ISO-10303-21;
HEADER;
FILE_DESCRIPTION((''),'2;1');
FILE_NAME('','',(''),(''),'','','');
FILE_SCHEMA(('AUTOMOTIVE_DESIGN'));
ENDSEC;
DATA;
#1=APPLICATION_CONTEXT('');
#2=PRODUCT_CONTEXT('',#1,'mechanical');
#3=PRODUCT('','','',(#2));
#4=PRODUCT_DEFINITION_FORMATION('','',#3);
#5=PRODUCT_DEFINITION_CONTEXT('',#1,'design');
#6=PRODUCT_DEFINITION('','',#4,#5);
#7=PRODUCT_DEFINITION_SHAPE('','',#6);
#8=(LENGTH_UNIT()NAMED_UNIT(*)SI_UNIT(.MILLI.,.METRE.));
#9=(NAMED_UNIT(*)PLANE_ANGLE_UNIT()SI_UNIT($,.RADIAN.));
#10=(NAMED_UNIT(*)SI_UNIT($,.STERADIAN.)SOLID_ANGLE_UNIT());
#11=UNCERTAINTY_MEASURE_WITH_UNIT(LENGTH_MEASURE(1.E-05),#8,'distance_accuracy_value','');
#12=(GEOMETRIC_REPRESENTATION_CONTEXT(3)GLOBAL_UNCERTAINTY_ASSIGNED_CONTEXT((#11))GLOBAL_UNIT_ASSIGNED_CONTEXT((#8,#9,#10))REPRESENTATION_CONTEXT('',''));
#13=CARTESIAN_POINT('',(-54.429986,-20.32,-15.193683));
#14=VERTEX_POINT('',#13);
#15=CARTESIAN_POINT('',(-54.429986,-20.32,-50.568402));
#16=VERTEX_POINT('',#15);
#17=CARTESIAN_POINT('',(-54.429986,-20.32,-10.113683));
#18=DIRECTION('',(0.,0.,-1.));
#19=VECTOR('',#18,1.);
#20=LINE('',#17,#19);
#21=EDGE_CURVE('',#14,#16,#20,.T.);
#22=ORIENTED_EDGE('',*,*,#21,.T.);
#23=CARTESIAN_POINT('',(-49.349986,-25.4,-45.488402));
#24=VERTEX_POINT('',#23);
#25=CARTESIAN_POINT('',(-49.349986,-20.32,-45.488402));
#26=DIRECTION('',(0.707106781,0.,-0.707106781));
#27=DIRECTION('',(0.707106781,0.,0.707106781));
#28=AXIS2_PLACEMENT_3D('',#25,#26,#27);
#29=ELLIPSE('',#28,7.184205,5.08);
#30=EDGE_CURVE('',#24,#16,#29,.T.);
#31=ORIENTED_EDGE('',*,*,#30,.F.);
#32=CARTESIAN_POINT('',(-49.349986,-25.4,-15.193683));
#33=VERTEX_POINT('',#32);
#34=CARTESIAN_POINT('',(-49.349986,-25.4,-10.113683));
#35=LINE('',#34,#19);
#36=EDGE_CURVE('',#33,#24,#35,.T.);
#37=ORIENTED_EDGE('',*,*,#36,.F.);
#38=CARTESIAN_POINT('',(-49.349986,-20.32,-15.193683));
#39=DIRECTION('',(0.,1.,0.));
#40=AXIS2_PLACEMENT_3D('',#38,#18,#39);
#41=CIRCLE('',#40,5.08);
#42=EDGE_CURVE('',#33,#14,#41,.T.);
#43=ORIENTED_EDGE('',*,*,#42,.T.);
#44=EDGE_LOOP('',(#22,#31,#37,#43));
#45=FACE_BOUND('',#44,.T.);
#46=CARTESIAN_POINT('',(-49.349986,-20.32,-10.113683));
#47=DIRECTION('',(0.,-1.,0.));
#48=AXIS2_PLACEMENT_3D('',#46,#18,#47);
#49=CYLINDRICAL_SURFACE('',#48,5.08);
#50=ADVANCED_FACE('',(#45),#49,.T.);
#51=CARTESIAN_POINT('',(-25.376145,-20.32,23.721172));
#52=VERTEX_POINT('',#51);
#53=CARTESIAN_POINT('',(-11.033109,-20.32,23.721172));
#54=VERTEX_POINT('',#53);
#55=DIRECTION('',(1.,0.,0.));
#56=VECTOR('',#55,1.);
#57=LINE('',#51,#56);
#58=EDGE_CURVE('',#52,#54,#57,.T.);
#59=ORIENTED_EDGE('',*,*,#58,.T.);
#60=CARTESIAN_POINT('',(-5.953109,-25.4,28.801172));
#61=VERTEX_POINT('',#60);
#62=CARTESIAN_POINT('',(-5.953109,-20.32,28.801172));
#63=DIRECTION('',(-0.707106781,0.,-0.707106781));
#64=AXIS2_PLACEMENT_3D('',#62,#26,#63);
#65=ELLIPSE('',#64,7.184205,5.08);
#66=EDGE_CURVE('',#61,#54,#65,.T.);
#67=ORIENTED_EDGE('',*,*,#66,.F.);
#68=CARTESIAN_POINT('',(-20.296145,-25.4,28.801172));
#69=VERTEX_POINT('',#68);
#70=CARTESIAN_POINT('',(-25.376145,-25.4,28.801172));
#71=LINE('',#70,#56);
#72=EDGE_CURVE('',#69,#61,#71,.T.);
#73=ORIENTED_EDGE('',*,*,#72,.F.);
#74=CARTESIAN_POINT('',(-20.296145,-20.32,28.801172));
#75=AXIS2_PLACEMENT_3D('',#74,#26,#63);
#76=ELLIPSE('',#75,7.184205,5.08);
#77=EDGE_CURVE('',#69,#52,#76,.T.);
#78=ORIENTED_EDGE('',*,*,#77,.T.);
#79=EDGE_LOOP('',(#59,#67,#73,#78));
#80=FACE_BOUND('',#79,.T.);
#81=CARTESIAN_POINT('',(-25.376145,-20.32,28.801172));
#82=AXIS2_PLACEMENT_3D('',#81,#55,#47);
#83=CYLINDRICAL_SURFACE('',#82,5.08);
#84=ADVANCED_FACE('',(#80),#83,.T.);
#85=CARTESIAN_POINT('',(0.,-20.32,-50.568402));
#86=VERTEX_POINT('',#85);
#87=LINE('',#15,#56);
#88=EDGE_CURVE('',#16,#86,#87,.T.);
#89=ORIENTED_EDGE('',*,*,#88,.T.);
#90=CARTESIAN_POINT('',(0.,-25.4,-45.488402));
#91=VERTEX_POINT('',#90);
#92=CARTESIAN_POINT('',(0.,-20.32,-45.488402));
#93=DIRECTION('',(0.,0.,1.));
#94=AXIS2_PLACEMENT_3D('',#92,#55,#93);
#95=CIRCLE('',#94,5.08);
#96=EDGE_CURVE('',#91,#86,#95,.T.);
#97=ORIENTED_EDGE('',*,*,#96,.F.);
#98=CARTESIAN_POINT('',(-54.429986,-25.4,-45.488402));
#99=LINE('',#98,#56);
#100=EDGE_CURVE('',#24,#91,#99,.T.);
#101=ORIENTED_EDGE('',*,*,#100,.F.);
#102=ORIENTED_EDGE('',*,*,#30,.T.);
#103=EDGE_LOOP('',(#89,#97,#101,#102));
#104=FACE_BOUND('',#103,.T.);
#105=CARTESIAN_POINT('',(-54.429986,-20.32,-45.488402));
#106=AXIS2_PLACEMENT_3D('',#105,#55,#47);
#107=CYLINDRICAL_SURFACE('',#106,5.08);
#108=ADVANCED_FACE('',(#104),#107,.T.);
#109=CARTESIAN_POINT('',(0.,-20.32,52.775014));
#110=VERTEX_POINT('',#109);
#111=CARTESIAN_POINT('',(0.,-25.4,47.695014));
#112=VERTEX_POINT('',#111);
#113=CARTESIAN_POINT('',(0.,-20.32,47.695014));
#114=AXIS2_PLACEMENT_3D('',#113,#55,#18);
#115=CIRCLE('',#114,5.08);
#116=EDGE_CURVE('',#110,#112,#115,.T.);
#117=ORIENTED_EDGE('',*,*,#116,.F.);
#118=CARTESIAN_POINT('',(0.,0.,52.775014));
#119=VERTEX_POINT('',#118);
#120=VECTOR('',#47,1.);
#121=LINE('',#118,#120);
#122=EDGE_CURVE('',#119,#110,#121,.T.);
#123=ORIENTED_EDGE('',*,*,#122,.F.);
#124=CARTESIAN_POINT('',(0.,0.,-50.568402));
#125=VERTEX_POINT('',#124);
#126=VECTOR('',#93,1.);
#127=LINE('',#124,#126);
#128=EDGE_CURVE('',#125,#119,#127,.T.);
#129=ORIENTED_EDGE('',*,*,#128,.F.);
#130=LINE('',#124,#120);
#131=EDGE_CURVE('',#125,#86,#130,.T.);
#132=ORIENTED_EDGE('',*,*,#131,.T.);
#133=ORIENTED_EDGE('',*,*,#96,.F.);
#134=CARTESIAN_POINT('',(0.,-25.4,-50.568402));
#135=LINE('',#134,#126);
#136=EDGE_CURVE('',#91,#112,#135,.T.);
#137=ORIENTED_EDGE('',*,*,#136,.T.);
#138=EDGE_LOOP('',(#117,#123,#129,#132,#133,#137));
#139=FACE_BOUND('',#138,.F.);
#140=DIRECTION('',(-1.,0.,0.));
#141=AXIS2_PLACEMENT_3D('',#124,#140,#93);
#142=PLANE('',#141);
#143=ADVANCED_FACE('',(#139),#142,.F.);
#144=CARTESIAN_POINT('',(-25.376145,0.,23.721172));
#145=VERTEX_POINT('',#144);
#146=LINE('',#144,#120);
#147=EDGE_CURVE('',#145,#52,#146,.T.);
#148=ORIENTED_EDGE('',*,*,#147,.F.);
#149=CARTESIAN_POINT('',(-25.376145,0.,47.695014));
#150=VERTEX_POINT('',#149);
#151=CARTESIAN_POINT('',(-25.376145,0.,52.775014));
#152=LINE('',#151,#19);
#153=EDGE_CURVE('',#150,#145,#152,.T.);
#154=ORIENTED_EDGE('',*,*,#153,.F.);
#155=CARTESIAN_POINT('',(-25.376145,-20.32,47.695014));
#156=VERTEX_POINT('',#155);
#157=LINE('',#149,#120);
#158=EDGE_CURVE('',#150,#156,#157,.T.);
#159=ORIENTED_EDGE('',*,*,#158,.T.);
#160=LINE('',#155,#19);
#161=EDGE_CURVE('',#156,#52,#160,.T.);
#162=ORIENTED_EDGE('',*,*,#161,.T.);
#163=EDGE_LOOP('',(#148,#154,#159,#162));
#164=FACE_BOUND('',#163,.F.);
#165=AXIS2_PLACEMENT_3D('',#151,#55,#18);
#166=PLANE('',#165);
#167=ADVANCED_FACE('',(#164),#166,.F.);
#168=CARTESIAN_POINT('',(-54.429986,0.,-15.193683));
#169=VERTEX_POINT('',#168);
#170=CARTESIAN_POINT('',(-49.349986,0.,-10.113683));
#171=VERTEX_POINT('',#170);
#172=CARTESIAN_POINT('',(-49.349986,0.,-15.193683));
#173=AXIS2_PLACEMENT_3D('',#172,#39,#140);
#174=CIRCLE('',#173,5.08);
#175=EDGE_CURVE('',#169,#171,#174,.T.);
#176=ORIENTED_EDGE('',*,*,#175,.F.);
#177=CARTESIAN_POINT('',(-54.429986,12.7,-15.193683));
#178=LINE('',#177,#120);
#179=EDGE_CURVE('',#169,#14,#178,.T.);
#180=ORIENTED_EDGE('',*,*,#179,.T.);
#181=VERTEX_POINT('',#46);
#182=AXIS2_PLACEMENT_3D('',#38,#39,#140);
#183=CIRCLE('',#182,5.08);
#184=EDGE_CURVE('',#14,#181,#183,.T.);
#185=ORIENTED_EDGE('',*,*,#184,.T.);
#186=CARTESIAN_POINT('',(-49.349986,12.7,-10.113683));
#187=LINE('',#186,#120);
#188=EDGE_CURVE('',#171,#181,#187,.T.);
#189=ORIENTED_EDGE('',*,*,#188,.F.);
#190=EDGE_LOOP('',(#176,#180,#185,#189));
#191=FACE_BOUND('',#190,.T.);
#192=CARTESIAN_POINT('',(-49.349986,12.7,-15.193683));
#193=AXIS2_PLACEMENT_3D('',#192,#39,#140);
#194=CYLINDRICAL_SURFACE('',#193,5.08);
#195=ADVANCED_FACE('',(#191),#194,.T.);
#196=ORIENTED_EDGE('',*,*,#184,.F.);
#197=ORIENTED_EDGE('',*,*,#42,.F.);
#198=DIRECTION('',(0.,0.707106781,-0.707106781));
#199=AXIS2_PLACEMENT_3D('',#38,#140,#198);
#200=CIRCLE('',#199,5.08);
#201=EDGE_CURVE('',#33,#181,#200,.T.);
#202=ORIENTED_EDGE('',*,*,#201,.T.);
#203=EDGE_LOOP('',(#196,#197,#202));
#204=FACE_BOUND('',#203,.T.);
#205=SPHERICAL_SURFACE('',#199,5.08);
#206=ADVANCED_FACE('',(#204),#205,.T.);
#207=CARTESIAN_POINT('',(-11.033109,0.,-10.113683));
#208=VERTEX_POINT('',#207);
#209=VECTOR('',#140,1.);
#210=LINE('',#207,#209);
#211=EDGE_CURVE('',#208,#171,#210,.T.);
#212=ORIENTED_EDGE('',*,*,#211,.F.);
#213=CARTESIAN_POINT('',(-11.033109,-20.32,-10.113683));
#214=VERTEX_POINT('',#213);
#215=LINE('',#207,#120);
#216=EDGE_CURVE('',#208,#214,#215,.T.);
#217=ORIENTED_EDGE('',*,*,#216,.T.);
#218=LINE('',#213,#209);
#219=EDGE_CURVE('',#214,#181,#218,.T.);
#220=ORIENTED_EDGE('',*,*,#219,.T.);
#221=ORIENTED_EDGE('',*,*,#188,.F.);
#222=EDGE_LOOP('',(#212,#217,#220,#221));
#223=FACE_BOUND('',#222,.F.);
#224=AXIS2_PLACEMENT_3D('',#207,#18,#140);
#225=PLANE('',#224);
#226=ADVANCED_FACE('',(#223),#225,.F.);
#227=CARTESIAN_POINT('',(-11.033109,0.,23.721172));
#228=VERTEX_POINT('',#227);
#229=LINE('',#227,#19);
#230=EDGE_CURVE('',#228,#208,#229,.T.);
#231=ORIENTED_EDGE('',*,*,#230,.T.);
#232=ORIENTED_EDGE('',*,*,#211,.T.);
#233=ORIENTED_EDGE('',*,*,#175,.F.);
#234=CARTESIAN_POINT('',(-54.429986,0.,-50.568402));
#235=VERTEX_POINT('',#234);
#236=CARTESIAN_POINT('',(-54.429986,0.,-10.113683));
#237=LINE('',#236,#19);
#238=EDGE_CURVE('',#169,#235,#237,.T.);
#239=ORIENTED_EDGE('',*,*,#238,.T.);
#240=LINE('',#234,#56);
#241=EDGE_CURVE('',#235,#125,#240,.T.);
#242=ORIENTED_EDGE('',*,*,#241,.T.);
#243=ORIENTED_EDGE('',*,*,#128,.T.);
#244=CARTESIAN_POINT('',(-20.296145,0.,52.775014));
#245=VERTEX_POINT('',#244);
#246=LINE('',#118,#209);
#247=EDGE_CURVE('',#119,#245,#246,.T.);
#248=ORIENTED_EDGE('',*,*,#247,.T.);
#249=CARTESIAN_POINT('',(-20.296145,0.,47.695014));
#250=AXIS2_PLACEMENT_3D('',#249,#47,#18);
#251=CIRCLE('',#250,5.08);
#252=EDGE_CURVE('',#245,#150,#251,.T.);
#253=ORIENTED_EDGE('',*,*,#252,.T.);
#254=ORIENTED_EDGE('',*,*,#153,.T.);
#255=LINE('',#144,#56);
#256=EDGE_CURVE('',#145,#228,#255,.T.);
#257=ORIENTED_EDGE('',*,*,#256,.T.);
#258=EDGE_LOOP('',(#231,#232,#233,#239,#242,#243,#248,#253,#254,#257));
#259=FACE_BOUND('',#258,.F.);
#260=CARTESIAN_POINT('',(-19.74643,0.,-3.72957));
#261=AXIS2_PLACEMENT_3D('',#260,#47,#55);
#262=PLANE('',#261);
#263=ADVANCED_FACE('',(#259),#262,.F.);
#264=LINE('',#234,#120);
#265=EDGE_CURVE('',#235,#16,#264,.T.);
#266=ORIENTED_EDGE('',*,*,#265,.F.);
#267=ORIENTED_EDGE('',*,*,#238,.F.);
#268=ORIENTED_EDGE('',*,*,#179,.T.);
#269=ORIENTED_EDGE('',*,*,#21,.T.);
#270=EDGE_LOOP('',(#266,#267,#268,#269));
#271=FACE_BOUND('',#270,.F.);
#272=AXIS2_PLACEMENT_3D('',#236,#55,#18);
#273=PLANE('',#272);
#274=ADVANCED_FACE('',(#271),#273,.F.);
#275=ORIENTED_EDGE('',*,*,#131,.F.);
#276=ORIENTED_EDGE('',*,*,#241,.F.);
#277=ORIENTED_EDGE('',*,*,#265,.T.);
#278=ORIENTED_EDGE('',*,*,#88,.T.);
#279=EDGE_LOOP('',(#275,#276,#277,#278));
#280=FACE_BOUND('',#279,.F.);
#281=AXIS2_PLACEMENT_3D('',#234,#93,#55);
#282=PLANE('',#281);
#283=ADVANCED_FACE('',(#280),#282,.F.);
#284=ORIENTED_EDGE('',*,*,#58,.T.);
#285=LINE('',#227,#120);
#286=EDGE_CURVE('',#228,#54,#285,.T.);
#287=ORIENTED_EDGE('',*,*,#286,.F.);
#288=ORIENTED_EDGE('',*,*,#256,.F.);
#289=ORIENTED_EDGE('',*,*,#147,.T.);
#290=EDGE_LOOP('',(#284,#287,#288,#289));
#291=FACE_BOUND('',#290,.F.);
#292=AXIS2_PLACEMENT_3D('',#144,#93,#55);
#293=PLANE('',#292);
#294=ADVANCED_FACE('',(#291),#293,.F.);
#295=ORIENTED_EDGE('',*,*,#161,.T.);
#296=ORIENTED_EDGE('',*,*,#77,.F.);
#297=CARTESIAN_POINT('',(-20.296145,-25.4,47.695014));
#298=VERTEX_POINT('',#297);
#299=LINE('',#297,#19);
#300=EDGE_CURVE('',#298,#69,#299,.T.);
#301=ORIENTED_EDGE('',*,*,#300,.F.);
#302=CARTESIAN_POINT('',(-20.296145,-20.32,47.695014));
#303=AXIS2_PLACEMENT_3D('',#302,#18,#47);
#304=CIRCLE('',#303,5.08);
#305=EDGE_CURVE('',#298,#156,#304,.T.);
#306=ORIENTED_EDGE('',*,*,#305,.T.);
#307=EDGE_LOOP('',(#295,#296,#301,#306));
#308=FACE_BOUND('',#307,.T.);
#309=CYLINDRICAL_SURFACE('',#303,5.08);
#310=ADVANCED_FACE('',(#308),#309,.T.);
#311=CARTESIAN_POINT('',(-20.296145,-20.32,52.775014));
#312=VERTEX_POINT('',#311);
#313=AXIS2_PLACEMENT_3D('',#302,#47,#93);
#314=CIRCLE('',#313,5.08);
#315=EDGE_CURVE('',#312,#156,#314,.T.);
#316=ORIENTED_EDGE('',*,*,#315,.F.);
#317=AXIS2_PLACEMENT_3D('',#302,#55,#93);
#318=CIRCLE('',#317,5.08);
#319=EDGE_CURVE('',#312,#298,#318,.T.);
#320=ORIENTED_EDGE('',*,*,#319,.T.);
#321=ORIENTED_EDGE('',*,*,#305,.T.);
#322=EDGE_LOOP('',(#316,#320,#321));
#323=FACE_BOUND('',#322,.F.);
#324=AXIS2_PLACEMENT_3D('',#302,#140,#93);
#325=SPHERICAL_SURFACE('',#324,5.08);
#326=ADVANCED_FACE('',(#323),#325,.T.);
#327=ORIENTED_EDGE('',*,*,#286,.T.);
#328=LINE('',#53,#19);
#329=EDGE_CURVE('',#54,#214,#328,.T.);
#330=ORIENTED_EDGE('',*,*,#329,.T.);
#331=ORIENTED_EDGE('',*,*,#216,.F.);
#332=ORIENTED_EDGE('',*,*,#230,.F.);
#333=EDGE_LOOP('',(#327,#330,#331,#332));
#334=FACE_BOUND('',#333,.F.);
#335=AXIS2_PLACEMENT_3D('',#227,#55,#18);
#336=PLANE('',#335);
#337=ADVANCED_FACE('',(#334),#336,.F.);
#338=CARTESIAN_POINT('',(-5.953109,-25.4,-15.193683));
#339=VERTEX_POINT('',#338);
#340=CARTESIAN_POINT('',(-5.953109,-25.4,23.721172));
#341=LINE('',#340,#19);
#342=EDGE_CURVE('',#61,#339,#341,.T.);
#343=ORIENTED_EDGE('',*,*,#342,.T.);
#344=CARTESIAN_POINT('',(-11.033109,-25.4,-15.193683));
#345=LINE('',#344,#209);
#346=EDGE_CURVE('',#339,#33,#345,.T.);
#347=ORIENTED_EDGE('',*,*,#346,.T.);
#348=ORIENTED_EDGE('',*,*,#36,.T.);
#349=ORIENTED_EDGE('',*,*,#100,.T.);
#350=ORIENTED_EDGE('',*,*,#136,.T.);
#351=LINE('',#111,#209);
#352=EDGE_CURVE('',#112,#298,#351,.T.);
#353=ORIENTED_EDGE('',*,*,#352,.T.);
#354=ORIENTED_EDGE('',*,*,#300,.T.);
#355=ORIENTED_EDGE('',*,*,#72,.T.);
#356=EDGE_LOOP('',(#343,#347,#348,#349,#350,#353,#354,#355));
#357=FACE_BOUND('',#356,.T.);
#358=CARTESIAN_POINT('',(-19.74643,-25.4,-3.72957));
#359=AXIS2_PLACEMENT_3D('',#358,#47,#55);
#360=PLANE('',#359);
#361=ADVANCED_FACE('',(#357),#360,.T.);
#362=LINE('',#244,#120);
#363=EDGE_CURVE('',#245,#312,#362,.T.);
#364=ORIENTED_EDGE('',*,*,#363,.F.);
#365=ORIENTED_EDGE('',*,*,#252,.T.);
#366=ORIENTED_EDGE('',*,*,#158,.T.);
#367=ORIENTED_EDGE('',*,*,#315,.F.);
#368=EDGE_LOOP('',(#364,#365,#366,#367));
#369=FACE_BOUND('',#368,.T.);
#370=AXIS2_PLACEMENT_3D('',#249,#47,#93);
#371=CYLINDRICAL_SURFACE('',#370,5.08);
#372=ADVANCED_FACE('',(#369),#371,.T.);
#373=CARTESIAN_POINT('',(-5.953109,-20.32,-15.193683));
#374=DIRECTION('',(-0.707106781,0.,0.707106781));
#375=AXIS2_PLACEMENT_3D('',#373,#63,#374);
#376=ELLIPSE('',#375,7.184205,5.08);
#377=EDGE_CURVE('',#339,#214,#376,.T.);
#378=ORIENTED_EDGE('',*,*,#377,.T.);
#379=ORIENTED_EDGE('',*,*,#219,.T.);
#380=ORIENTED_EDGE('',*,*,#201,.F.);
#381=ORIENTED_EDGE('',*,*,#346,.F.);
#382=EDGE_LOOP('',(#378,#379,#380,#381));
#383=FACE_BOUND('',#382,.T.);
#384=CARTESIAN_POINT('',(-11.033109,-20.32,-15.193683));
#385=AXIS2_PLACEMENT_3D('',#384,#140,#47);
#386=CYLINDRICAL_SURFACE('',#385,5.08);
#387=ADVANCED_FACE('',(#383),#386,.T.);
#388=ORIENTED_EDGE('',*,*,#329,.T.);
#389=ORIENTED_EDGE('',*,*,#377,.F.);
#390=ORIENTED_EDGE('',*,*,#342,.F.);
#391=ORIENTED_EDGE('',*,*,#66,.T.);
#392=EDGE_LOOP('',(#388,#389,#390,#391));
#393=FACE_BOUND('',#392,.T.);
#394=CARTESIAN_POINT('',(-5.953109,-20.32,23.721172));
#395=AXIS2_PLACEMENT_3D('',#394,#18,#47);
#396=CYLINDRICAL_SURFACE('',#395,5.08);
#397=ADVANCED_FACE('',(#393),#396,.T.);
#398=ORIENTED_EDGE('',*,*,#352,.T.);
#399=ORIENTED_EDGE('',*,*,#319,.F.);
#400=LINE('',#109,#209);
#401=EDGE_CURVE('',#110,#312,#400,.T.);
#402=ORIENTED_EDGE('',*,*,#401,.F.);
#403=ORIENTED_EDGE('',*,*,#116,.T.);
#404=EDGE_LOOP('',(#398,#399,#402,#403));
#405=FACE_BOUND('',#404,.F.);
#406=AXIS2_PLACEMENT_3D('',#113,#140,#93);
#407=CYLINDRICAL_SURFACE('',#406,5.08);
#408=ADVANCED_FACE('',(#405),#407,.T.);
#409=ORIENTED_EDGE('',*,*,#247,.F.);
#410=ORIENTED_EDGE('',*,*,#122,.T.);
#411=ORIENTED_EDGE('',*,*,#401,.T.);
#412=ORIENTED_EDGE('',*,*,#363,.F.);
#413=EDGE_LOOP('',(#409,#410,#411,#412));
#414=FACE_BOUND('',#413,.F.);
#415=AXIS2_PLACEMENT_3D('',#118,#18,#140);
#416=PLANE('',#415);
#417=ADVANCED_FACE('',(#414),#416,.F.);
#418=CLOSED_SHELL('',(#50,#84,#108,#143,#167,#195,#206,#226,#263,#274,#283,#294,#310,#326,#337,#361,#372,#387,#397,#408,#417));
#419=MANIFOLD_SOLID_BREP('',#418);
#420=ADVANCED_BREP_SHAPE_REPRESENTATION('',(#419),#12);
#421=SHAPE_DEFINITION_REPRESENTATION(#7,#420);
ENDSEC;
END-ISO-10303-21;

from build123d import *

# Parameters (mm, degrees)
F1_DEPTH    = 25.4
F2_R        = 5.08
F3_R        = 5.08
F4_T1_DEPTH = 33.02
F4_S5_W     = 5.08
F4_S5_H     = 5.08
F4_T6_DEPTH = 5.08


# Not quite as in the source:
# - a fillet or chamfer that OpenCascade refuses, or shapes differently, is made with other operations: its cross-section is extruded or revolved along the edge and cut away or added


with BuildPart() as f1:
    # F0 (on Front) → F1 (new body)
    with BuildSketch(Plane.XZ):
        Polygon((0, -50.5684018135), (0, 52.7750141919), (-25.3761447966, 52.7750141919), (-25.3761447966, 23.721171543), (-11.0331093892, 23.721171543), (-11.0331093892, -10.1136825979), (-54.4299855828, -10.1136825979), (-54.4299855828, -50.5684018135), align=None)
    extrude(amount=F1_DEPTH)

    # F2
    f2_edges = [f1.edges().sort_by_distance(p)[0] for p in [
        (-12.688072, -25.4, 52.775014),
    ]]
    fillet(f2_edges, radius=F2_R)

    # F3
    f3_edges = [f1.edges().sort_by_distance(p)[0] for p in [
        (-27.214993, -25.4, -50.568402),
        (-54.429986, -25.4, -30.341042),
        (-32.731547, -25.4, -10.113683),
        (-11.033109, -25.4, 6.803744),
        (-25.376145, -25.4, 35.708093),
        (-18.204627, -25.4, 23.721172),
    ]]
    fillet(f3_edges, radius=F3_R)

    # F4: fillet of radius 5.08 on 1 edges, made by hand

    # F4_s2 → F4_t1 (cut)
    with BuildSketch(Plane.XZ.offset(-12.7)):
        with BuildLine():
            ThreePointArc((-54.4299855828, -15.1936825979), (-52.9420880313, -11.6015801494), (-49.3499855828, -10.1136825979))
            Line((-49.3499855828, -10.1136825979), (-54.4299855828, -10.1136825979))
            Line((-54.4299855828, -10.1136825979), (-54.4299855828, -15.1936825979))
        make_face()
    extrude(amount=F4_T1_DEPTH, mode=Mode.SUBTRACT)


with BuildPart() as f4_tool4:
    # F4_s5 → F4_t6 (new body)
    with BuildSketch(Plane.YZ.offset(-49.3499855828)):
        with Locations((-22.86, -12.6536825979)):
            Rectangle(F4_S5_W, F4_S5_H)
    extrude(amount=-F4_T6_DEPTH)

    # F4_s7 → F4_t8 (revolve, cut)
    with BuildSketch(Plane(origin=(-49.3499855828, -20.32, -15.1936825979), x_dir=(0, 0.7071067812, -0.7071067812), z_dir=(0, 0.7071067812, 0.7071067812))):
        with BuildLine():
            ThreePointArc((0, -5.08), (5.08, 0), (0, 5.08))
            Line((0, 5.08), (0, -5.08))
        make_face()
    revolve(axis=Axis((-49.3499855828, -20.32, -15.1936825979), (-1, 0, 0)), mode=Mode.SUBTRACT)


with BuildPart() as f1_1:
    add(f1.part)

    # F4_t3: cut F4_tool4
    add(f4_tool4.part, mode=Mode.SUBTRACT)


solid = f1_1.part
